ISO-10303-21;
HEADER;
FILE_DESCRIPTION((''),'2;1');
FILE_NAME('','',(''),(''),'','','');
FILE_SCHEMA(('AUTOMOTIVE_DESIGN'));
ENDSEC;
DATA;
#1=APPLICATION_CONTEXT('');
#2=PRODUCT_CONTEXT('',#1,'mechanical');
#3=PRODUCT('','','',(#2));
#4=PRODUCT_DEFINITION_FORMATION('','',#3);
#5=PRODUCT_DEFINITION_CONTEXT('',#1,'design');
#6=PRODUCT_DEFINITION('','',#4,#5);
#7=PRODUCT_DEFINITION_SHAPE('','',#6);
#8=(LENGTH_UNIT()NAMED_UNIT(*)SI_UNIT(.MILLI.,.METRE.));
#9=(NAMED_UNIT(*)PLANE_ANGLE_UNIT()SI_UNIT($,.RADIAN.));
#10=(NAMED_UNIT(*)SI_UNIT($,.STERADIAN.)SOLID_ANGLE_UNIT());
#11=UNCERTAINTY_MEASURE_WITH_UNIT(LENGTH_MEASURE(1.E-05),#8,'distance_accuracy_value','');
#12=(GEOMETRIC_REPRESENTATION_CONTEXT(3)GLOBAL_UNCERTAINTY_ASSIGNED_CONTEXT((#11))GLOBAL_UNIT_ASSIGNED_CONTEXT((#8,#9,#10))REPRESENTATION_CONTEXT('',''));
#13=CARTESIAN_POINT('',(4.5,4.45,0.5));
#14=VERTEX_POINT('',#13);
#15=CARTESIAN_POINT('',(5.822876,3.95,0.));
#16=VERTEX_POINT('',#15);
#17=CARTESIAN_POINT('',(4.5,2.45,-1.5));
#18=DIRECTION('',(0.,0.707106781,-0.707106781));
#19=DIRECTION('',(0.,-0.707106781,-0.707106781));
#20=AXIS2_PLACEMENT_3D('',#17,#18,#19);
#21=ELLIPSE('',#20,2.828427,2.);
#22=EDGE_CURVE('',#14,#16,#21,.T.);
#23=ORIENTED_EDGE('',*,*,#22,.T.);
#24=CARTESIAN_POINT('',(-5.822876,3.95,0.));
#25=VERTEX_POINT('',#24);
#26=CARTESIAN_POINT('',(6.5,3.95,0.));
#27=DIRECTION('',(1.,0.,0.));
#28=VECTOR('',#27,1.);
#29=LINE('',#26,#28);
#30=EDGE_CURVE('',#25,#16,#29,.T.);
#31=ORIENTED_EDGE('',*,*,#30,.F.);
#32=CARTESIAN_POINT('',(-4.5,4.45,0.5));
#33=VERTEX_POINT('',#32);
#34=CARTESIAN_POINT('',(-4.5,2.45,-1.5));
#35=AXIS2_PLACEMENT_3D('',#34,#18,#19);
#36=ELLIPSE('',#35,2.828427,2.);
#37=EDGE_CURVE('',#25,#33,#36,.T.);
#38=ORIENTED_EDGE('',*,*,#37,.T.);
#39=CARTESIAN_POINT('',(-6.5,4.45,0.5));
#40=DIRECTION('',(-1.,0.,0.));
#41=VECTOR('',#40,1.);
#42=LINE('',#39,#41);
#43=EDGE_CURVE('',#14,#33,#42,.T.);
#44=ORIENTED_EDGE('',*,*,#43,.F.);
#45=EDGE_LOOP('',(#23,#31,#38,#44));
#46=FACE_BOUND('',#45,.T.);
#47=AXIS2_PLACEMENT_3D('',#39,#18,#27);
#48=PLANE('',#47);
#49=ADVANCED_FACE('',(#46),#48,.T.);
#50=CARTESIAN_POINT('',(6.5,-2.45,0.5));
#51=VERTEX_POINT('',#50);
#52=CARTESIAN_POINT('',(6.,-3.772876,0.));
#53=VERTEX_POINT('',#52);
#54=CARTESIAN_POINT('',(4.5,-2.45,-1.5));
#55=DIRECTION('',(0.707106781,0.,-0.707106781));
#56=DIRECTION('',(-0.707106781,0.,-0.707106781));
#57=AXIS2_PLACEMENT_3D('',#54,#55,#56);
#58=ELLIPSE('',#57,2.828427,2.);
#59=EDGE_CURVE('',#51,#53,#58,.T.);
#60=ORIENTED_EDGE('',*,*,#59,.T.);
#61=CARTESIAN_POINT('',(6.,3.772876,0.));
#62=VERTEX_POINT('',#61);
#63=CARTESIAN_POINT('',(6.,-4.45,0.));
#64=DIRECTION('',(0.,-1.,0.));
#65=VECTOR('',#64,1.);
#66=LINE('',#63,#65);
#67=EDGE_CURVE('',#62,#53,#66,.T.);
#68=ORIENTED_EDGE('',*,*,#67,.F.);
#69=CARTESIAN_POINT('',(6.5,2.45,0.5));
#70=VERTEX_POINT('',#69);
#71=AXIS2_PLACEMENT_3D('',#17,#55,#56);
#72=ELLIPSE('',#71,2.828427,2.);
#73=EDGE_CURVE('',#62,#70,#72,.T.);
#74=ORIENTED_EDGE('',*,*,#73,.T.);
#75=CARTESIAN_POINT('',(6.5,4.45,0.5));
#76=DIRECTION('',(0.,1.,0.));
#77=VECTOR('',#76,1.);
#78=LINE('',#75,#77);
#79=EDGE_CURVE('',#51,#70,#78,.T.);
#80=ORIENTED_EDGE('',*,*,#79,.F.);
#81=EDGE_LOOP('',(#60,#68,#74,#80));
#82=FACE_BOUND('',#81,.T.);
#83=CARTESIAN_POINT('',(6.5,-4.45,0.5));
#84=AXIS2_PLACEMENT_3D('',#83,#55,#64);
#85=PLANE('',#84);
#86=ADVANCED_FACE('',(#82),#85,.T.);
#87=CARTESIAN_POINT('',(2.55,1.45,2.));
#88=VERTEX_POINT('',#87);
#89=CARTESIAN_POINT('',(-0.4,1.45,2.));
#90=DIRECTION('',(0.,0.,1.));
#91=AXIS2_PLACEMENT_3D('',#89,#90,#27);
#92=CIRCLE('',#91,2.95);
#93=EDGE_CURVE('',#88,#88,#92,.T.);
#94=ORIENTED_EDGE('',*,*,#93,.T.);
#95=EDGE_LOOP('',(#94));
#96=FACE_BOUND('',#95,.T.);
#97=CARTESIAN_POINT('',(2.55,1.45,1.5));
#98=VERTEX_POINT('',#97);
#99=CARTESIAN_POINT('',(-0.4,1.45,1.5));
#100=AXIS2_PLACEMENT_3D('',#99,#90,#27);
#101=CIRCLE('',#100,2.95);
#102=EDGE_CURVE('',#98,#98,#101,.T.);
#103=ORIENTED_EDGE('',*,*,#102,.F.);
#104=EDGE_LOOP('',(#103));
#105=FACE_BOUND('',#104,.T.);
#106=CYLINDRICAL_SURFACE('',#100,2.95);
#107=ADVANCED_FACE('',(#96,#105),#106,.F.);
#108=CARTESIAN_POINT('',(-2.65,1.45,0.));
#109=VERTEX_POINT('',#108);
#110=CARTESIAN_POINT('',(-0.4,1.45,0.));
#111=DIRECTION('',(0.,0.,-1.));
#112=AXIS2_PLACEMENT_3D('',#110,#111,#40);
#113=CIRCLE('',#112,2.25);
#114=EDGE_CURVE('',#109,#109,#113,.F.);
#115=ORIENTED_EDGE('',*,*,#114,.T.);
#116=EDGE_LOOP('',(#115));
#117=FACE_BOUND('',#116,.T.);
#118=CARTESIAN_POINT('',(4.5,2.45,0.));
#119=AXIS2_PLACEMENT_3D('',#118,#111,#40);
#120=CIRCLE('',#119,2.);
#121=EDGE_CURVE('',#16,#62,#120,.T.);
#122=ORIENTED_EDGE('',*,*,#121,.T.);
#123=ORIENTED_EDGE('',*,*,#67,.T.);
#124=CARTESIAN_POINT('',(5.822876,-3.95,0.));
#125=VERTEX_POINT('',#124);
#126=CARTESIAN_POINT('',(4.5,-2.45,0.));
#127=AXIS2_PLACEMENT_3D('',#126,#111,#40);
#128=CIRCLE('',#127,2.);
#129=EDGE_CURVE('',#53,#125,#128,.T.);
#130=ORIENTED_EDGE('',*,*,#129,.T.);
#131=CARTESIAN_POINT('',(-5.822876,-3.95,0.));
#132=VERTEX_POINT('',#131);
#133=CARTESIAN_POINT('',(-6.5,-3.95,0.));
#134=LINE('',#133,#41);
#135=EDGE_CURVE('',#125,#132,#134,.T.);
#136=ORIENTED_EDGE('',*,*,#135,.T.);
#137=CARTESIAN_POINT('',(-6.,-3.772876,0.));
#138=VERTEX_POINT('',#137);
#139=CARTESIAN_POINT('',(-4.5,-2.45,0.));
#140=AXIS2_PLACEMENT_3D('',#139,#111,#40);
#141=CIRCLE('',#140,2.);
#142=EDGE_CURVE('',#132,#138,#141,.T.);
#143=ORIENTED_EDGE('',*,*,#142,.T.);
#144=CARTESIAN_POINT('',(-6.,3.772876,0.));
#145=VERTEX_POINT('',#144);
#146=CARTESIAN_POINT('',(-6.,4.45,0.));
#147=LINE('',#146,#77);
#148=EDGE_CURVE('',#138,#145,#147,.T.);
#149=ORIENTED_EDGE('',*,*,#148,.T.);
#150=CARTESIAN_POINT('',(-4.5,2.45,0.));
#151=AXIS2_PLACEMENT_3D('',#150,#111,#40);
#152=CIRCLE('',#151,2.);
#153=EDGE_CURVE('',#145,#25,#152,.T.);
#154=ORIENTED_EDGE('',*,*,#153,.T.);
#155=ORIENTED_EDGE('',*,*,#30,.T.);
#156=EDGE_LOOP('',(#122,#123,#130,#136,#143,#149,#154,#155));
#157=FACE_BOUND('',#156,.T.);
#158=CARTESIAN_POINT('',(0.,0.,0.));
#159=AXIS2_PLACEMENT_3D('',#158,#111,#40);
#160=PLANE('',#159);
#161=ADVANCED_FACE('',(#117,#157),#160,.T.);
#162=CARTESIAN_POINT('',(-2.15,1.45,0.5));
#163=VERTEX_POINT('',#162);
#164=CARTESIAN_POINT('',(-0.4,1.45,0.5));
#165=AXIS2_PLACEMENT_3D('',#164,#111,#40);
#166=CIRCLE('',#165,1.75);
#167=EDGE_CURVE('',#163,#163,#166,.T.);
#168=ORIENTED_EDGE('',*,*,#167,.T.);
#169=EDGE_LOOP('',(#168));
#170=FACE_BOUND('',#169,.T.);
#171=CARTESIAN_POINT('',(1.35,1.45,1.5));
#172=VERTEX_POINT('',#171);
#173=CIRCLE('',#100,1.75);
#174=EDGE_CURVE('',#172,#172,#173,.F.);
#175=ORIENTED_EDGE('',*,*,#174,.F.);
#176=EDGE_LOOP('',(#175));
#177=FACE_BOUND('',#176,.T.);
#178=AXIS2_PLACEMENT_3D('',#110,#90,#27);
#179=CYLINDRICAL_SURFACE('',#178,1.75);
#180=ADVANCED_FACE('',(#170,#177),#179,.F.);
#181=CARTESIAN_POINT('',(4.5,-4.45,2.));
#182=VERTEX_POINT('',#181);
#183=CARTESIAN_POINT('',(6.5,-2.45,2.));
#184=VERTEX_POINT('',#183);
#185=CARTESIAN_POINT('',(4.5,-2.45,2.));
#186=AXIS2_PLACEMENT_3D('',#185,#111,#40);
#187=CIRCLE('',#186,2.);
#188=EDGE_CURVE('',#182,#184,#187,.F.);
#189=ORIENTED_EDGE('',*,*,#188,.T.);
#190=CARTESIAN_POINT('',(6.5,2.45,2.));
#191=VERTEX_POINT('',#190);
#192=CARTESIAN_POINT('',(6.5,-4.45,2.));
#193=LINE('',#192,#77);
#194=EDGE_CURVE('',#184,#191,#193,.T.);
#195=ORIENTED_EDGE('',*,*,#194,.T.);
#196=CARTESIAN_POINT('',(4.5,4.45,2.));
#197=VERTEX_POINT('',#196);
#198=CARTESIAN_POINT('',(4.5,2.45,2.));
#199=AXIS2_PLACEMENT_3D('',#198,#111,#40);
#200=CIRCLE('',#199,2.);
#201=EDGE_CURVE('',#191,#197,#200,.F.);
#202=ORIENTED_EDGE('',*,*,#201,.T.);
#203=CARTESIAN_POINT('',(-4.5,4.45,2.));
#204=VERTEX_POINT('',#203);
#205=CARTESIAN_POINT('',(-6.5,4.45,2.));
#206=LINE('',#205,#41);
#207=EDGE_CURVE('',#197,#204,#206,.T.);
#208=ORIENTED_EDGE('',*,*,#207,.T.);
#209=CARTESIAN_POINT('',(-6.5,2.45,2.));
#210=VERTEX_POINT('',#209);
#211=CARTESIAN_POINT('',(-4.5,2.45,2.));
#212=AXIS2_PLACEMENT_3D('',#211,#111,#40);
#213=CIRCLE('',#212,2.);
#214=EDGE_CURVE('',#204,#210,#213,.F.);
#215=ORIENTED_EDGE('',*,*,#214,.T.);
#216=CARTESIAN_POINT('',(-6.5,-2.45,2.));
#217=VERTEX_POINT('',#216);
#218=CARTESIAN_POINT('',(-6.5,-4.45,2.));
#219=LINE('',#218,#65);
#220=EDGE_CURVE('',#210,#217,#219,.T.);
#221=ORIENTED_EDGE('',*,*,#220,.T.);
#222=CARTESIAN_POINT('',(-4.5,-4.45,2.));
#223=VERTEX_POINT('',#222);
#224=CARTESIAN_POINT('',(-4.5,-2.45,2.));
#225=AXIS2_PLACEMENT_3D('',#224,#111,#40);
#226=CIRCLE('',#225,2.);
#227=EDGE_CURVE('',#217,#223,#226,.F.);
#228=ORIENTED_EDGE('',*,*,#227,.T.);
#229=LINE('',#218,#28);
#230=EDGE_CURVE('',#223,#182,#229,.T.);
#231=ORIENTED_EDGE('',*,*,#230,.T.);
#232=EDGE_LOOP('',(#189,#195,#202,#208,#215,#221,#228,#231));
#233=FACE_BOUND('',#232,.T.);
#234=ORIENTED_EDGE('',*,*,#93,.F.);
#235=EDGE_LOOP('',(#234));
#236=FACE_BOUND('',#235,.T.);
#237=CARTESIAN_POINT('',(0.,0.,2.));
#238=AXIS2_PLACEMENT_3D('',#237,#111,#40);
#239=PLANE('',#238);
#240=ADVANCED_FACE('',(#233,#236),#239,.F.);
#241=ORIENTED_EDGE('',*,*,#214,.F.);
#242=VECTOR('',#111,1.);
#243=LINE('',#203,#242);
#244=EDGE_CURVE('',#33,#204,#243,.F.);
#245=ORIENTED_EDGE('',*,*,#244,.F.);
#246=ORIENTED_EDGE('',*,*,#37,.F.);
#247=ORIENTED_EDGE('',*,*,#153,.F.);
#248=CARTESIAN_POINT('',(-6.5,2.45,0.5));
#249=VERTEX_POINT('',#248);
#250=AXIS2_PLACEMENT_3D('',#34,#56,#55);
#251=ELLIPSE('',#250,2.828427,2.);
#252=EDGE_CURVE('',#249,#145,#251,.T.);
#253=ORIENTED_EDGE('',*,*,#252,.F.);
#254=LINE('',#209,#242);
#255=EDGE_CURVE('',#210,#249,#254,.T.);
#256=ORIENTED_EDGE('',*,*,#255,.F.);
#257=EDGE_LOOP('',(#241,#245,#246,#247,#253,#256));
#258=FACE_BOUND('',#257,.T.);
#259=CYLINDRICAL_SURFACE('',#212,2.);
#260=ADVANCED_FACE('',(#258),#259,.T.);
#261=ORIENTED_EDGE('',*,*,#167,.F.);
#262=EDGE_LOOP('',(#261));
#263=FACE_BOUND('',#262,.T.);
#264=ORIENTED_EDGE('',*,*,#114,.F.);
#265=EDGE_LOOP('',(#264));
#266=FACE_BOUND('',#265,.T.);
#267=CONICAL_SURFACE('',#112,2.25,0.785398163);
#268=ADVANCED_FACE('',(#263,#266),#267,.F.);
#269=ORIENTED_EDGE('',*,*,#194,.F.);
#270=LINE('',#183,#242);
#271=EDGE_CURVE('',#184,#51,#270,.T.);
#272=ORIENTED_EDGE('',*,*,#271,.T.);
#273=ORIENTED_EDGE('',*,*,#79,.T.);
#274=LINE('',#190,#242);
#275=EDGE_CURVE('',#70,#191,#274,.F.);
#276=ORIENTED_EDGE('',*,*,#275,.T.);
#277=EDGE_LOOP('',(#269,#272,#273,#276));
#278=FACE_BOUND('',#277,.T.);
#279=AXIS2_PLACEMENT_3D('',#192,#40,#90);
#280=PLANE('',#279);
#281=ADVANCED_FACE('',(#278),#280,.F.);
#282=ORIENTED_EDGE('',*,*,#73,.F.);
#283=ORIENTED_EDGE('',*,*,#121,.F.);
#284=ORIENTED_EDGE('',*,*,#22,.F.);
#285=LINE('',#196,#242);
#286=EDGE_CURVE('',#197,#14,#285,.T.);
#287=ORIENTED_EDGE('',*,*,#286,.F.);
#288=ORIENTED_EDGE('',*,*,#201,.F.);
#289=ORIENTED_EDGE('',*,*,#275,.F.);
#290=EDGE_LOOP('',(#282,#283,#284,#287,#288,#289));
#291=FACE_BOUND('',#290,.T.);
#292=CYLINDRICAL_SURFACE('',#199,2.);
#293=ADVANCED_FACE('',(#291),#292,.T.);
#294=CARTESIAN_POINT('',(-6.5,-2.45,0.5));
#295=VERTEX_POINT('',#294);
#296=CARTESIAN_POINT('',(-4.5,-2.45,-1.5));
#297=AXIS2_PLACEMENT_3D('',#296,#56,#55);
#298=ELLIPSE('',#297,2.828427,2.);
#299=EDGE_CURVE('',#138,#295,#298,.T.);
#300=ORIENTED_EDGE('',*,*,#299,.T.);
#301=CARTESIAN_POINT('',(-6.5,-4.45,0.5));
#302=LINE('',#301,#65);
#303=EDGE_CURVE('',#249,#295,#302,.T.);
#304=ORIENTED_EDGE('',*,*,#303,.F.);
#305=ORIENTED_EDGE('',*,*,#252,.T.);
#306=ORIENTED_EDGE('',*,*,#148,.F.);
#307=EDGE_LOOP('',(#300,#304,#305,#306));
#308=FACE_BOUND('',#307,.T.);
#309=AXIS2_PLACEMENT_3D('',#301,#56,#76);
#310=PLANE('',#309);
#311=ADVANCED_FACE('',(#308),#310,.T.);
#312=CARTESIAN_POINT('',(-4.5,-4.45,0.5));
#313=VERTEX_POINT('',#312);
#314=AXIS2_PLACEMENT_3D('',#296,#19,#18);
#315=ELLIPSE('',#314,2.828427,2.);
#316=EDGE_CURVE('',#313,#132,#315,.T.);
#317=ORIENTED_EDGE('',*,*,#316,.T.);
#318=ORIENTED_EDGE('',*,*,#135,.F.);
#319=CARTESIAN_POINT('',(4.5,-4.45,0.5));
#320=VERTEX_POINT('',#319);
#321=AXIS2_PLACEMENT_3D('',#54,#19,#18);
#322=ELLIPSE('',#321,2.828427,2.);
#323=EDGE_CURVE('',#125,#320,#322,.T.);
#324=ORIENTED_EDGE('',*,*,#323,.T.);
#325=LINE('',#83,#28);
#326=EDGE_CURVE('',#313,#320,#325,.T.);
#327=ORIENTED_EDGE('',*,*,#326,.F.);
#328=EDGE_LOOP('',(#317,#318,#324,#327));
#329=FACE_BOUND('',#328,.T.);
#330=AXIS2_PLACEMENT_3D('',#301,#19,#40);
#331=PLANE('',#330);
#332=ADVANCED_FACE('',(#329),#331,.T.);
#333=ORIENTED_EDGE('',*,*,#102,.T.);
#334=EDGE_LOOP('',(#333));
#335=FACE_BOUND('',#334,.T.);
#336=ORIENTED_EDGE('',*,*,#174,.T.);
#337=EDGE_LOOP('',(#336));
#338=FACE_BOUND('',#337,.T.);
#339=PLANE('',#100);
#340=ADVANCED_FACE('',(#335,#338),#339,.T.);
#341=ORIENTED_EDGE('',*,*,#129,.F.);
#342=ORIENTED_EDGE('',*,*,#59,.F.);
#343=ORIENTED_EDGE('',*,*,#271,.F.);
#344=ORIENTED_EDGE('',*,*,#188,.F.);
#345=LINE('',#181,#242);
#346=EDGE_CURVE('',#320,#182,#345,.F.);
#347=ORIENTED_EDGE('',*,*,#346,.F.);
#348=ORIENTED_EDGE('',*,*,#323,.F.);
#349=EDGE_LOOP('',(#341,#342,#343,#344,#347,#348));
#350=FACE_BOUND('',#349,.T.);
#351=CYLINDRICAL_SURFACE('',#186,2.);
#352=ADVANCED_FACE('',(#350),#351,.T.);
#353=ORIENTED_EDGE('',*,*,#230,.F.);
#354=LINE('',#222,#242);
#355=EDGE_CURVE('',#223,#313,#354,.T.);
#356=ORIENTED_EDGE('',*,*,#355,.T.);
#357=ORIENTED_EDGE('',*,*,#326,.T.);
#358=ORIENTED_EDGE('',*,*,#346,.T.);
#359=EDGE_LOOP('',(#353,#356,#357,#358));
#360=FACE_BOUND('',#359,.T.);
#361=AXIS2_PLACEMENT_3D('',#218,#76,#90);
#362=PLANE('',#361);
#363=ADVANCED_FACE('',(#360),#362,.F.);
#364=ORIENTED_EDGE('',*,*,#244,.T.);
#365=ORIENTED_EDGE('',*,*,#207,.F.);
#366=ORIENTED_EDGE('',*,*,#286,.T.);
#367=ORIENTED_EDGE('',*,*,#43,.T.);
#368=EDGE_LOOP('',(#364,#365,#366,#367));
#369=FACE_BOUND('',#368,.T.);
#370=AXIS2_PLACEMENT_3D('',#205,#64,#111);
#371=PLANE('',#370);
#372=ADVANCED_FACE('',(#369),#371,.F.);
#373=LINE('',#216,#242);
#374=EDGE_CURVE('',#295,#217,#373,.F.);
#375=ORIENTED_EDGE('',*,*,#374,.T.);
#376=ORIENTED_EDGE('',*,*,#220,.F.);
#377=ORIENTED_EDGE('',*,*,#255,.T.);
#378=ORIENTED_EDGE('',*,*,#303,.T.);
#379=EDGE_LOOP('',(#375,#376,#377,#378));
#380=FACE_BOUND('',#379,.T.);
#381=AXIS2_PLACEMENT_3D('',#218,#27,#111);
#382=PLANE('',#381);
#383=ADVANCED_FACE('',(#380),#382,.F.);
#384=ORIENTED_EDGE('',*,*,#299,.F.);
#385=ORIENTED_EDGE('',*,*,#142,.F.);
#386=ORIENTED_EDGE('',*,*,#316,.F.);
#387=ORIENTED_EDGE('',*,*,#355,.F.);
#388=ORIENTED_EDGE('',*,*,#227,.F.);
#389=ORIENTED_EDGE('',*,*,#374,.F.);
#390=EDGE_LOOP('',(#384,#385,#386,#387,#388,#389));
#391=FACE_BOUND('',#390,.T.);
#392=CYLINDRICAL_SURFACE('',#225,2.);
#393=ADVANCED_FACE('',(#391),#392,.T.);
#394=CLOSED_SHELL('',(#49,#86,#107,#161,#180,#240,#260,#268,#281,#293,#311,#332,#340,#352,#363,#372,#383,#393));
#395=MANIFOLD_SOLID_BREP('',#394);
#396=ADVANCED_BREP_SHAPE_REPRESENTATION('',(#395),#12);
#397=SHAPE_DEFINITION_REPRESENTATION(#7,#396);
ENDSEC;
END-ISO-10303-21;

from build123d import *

# Parameters (mm, degrees)
SKETCH1_W           = 13
SKETCH1_H           = 8.9
BOSS_EXTRUDE1_DEPTH = 2
SKETCH2_R           = 1.75
CUT_EXTRUDE4_DEPTH  = 9.127268914
SKETCH3_R           = 2.95
CUT_EXTRUDE9_DEPTH  = 0.5
CHAMFER1_SIZE       = 0.5
FILLET2_R           = 2


with BuildPart() as part:
    # Sketch1 → Boss-Extrude1 (new body)
    with BuildSketch(Plane.XY):
        Rectangle(SKETCH1_W, SKETCH1_H)
    extrude(amount=BOSS_EXTRUDE1_DEPTH)

    # Sketch2 → Cut-Extrude4 (cut, through all)
    with BuildSketch(Plane.XY.offset(2)):
        with Locations((-0.4, 1.45)):
            Circle(SKETCH2_R)
    extrude(amount=-CUT_EXTRUDE4_DEPTH, mode=Mode.SUBTRACT)

    # Sketch3 → Cut-Extrude9 (cut)
    with BuildSketch(Plane.XY.offset(2)):
        with Locations((-0.4, 1.45)):
            Circle(SKETCH3_R)
    extrude(amount=-CUT_EXTRUDE9_DEPTH, mode=Mode.SUBTRACT)

    # Chamfer1
    chamfer1_edges = [part.edges().sort_by_distance(p)[0] for p in [
        (-2.15, 1.45, 0),
        (0, -4.45, 0),
        (-6.5, 0, 0),
        (0, 4.45, 0),
        (6.5, 0, 0),
    ]]
    chamfer(chamfer1_edges, length=CHAMFER1_SIZE)

    # Fillet2
    # the kernel refuses this fillet: 2 mm, written as the material it takes off along each edge
    with BuildSketch(Plane(origin=(-6.5, 4.45, -4.5), x_dir=(0, -1, 0), z_dir=(0, 0, 1)), Plane(origin=(-6.5, -4.45, -4.5), x_dir=(1, 0, 0), z_dir=(0, 0, 1))) as fillet2_piece_1:
        with BuildLine():
            CenterArc((FILLET2_R, FILLET2_R), FILLET2_R, 180, 90)
            Line((0, FILLET2_R), (0, 0))
            Line((0, 0), (FILLET2_R, 0))
        make_face()
    extrude(amount=11.5, mode=Mode.SUBTRACT)
    with BuildSketch(Plane(origin=(6.5, 4.45, -4.5), x_dir=(0, -1, 0), z_dir=(0, 0, 1)), Plane(origin=(6.5, -4.45, -4.5), x_dir=(-1, 0, 0), z_dir=(0, 0, 1))) as fillet2_piece_2:
        with BuildLine():
            CenterArc((FILLET2_R, -FILLET2_R), FILLET2_R, 90, 90)
            Line((0, -FILLET2_R), (0, 0))
            Line((0, 0), (FILLET2_R, 0))
        make_face()
    extrude(amount=11.5, mode=Mode.SUBTRACT)


solid = part.part
